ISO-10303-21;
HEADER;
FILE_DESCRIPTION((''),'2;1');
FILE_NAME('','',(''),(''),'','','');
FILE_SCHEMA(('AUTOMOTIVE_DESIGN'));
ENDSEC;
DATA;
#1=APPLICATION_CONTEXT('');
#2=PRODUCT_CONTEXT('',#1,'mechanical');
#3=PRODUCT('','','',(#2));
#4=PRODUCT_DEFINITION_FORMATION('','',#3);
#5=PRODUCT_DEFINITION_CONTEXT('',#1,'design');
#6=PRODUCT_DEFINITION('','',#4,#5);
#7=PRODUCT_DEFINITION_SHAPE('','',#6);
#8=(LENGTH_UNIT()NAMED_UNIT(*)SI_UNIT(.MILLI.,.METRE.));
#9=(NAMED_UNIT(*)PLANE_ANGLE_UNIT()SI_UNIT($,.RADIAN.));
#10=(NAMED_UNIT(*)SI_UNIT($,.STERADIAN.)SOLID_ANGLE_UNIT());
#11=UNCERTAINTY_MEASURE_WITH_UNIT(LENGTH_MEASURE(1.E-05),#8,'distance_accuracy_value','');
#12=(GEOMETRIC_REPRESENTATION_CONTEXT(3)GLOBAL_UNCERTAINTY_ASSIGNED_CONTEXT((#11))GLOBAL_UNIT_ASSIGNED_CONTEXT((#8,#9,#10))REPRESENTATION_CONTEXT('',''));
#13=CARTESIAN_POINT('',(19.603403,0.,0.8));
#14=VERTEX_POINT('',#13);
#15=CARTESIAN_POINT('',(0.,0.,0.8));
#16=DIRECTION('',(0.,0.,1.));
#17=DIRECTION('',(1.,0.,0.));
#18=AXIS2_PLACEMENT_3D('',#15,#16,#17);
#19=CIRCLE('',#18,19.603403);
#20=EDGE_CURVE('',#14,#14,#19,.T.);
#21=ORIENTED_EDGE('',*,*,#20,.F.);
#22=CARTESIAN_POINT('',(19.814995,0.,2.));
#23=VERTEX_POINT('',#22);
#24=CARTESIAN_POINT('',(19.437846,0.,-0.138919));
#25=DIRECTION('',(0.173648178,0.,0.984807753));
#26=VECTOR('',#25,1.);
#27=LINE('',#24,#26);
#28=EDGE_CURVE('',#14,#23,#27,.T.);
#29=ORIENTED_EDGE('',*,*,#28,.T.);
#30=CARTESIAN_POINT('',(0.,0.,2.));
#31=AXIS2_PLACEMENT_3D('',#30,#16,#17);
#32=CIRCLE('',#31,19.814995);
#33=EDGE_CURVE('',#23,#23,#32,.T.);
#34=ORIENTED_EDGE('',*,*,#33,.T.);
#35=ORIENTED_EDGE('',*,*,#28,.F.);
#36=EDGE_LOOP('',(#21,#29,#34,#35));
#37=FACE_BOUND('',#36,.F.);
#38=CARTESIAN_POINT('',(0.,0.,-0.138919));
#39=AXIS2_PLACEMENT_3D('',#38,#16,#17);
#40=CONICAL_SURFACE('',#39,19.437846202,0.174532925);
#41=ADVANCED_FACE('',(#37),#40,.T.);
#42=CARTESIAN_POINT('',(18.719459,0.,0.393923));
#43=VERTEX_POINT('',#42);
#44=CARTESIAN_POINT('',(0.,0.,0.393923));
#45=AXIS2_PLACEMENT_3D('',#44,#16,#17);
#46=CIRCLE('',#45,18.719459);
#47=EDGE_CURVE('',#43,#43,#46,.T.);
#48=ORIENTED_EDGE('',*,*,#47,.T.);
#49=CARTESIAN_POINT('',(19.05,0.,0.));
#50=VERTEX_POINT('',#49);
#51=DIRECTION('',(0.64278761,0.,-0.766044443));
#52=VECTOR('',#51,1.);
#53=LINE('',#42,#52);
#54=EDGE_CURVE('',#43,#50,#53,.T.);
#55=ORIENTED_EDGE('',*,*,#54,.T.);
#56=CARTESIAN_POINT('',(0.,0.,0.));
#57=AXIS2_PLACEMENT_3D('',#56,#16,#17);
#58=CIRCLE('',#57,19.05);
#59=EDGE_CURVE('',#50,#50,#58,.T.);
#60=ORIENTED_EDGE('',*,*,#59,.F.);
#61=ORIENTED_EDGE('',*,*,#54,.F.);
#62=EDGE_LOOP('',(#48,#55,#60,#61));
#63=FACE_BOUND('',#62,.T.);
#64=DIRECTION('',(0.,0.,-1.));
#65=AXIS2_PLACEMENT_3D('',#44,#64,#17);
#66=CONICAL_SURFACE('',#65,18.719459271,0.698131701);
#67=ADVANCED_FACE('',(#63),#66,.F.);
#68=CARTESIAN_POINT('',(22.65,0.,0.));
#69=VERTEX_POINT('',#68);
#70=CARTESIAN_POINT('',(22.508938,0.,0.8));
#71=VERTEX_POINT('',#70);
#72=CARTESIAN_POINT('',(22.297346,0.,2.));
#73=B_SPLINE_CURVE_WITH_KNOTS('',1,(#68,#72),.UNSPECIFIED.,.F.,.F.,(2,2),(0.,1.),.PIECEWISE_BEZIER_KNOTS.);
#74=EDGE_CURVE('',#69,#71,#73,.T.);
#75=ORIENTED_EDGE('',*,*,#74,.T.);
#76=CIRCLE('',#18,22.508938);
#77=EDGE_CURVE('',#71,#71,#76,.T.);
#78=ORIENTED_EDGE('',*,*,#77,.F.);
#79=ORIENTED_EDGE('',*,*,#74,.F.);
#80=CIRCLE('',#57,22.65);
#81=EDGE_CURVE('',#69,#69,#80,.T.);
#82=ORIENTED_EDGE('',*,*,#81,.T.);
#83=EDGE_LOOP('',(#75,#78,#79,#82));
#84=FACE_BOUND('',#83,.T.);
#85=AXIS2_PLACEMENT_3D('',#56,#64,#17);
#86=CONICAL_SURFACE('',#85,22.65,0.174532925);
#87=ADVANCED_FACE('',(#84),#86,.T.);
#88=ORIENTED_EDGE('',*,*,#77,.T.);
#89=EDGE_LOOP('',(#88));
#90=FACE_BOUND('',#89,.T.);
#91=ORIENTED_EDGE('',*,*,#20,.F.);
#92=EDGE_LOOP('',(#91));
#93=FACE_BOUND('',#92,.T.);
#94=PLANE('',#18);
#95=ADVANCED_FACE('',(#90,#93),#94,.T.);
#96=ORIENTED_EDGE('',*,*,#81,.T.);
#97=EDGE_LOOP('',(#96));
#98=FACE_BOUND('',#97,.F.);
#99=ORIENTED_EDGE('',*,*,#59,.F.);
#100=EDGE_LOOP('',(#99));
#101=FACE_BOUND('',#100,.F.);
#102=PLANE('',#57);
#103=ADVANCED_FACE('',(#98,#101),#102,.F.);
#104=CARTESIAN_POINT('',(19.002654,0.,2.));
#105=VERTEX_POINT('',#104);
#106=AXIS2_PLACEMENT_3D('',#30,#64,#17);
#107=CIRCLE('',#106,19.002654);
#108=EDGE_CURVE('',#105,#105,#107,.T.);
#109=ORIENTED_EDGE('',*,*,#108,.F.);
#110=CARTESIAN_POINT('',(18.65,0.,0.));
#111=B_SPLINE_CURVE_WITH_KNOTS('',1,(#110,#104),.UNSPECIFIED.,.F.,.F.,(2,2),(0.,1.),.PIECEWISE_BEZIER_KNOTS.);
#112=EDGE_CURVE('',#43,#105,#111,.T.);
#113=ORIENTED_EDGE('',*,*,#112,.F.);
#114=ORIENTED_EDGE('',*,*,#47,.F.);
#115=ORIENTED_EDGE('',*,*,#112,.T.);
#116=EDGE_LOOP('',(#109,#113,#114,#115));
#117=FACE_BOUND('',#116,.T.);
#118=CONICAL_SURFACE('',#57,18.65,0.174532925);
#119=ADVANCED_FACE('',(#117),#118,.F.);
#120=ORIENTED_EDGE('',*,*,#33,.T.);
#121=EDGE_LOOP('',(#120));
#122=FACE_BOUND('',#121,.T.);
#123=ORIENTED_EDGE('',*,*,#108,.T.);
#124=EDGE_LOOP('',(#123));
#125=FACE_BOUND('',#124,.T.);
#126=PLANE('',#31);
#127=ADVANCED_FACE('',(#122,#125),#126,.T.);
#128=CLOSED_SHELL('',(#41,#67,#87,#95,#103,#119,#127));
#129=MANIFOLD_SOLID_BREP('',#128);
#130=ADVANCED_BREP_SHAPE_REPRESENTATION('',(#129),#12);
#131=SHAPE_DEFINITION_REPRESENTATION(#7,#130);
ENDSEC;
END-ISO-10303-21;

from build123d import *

# Parameters (mm, degrees)
F0_R     = 22.65
F0_R_2   = 18.65
F1_DEPTH = 2
F1_TAPER = 10
F2_T     = -0.8


# Not quite as in the source:
# - a fillet or chamfer that OpenCascade refuses, or shapes differently, is made with other operations: its cross-section is extruded or revolved along the edge and cut away or added


with BuildPart() as f1:
    # F0 (on Top) → F1 (new body)
    with BuildSketch(Plane.XY):
        Circle(F0_R)
        Circle(F0_R_2, mode=Mode.SUBTRACT)
    extrude(amount=F1_DEPTH, taper=F1_TAPER)

    # F2
    f2_openings = [f1.faces().sort_by_distance(p)[0] for p in [
        (-21.666682, 0, 2),
        (-22.473673, 0, 1),
    ]]
    offset(amount=F2_T, openings=f2_openings, kind=Kind.INTERSECTION)

    # F3: chamfer of 0.4 on 1 edges, made by hand

    # F3_s1 → F3_t2 (revolve, cut)
    with BuildSketch(Plane.XZ):
        Polygon((18.7194592711, 0.3939231012), (19.05, 0), (18.65, 0), align=None)
    revolve(axis=Axis((0, 0, 0), (0, 0, 1)), mode=Mode.SUBTRACT)


solid = f1.part
